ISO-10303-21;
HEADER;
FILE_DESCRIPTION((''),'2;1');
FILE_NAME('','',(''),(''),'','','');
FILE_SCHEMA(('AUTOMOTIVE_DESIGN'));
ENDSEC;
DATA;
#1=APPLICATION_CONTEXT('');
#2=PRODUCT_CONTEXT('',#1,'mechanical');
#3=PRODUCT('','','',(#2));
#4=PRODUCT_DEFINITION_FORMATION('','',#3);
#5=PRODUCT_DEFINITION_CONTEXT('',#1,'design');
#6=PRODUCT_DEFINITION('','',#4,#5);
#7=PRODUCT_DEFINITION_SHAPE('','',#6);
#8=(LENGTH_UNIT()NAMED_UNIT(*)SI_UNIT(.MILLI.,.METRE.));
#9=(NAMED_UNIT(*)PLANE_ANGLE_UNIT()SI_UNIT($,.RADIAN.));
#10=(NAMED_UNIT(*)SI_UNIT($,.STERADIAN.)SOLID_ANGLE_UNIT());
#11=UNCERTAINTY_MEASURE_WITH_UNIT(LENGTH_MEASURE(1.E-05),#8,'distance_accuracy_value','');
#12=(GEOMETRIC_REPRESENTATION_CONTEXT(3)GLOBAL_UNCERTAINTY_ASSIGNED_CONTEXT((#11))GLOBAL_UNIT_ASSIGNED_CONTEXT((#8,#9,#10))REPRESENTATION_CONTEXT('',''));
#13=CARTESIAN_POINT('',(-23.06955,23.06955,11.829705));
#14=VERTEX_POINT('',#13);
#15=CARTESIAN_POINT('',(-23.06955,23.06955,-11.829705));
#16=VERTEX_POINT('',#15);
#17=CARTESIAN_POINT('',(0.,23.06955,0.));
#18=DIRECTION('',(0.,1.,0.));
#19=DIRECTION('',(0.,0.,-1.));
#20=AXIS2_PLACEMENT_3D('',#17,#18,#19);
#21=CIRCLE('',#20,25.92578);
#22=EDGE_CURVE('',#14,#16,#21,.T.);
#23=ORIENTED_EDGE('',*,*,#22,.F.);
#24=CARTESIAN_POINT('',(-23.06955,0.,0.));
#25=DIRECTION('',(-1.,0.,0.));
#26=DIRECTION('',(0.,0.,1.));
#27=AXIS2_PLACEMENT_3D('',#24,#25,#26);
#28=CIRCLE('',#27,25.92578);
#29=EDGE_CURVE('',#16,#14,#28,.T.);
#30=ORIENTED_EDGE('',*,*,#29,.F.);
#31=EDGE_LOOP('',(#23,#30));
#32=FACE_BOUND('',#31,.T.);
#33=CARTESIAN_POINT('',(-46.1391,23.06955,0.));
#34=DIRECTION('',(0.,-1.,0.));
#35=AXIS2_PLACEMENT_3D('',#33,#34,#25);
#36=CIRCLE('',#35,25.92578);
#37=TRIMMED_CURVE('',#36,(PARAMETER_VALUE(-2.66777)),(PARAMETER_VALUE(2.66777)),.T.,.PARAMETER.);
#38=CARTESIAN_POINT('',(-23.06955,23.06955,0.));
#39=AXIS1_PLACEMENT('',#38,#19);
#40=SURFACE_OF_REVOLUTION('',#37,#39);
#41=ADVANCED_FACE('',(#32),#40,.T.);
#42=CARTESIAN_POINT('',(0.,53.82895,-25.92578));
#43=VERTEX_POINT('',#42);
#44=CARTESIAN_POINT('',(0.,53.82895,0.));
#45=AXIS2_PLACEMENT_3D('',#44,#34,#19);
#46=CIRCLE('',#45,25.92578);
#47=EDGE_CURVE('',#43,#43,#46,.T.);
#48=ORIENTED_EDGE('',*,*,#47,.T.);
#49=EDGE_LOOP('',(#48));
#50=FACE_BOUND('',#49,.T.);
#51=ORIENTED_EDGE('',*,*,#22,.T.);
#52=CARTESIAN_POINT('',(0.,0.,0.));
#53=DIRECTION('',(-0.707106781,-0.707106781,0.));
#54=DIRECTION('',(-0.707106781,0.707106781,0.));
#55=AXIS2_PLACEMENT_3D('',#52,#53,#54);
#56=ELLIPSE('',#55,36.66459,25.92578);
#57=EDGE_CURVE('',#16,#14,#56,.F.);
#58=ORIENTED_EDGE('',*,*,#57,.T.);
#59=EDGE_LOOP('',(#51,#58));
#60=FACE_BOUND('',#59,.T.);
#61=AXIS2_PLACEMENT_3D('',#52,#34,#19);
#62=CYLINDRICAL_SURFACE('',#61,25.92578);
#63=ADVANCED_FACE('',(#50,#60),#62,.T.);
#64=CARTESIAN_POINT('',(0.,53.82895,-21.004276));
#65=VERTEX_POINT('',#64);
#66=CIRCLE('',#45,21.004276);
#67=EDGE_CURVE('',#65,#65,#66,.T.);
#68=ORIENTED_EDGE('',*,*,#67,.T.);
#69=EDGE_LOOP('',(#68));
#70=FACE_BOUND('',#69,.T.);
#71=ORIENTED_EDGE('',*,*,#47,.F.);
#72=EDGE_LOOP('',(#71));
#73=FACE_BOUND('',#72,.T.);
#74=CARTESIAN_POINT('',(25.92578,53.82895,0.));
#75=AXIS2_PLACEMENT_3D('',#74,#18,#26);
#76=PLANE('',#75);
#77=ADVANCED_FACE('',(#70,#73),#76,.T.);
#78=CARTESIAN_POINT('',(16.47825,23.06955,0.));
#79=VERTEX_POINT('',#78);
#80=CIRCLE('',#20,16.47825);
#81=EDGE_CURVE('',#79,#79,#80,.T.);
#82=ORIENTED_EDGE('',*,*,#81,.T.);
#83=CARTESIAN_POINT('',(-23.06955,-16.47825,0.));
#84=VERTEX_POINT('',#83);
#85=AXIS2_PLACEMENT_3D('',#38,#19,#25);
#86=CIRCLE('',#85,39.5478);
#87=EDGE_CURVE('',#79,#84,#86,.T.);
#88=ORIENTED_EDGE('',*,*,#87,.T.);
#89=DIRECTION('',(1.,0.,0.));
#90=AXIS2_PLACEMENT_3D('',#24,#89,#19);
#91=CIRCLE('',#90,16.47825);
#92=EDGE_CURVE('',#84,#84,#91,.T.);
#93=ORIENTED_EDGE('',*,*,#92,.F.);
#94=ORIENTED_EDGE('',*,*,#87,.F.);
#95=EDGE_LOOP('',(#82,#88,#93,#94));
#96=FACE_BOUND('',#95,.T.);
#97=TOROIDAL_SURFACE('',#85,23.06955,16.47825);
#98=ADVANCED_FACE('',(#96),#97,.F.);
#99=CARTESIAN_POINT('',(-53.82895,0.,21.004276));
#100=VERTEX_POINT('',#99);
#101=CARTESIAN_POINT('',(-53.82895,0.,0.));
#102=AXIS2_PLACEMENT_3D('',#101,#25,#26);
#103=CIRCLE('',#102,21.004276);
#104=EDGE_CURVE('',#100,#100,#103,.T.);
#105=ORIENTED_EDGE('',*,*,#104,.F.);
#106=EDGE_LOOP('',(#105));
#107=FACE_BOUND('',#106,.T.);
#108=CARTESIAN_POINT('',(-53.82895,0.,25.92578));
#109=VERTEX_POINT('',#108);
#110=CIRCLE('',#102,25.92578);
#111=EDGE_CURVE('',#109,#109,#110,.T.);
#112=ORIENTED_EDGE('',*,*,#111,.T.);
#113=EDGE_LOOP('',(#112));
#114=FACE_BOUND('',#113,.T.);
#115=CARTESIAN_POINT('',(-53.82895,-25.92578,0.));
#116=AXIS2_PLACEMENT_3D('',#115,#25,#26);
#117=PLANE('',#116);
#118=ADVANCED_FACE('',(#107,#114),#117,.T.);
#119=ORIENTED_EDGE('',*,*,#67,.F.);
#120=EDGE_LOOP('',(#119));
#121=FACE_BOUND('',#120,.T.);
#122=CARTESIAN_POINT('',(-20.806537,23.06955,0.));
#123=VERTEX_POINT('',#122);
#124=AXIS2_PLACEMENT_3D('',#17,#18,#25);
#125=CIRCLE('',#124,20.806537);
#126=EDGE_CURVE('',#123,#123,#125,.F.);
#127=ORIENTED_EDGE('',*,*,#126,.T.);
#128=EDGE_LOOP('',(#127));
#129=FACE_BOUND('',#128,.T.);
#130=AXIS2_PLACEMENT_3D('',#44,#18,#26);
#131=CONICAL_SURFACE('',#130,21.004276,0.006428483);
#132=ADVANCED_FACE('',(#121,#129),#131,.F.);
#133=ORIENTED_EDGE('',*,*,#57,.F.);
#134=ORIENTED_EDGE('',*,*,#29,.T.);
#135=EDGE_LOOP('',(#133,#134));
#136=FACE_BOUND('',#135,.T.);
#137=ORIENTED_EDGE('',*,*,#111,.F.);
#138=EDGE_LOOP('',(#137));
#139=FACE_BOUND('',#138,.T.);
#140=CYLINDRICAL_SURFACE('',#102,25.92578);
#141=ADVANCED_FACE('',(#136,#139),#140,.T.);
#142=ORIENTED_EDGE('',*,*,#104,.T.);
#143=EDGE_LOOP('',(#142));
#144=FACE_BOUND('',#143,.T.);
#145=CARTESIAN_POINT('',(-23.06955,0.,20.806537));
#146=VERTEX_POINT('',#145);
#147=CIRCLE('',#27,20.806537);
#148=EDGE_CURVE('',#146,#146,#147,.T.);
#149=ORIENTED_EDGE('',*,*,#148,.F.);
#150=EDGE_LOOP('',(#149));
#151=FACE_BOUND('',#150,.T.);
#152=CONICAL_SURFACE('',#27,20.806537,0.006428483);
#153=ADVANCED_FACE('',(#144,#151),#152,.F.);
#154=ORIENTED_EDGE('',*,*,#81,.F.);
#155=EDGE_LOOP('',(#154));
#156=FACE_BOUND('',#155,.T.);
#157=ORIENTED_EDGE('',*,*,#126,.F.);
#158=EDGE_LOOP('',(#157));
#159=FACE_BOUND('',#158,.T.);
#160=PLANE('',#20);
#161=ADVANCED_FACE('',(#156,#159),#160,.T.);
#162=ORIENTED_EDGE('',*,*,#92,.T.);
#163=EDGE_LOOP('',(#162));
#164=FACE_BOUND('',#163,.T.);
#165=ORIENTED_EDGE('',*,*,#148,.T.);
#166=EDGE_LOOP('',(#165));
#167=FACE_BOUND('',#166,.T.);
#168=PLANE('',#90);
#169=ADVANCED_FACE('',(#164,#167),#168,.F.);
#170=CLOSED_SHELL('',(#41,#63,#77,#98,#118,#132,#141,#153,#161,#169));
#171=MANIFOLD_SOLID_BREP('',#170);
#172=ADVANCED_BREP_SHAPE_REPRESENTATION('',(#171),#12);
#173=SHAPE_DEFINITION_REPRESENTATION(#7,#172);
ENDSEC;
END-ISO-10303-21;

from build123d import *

# Parameters (mm, degrees)
SKETCH3_R    = 29.972
SKETCH3_R_2  = 19.05
SCALE1_SCALE = 0.865


with BuildPart() as part:
    # Sketch1 → Revolve1 (revolve)
    with BuildSketch(Plane.XY):
        Polygon((-62.23, -29.972), (-26.67, -29.972), (-26.67, -24.0538), (-62.23, -24.2824), align=None)
    revolve(axis=Axis((-62.23, 0, 0), (1, 0, 0)))


with BuildPart() as body_2:
    # Sketch2 → Revolve2 (revolve)
    with BuildSketch(Plane.XY):
        Polygon((24.2824, 62.23), (24.0538, 26.67), (29.972, 26.67), (29.972, 62.23), align=None)
    revolve(axis=Axis((0, 0, 0), (0, 1, 0)))


with BuildPart() as sweep1_tool:
    # Sweep1: sweep along a path in Sketch4
    with BuildLine(Plane.XY) as sweep1_path:
        ThreePointArc((-26.67, 0), (-7.811462, 7.811462), (0, 26.67))
    # Sketch3 → Sweep1 (sweep)
    with BuildSketch(Plane(origin=(-26.67, 0, 0), x_dir=(0, 0, -1), z_dir=(1, 0, 0))):
        Circle(SKETCH3_R)
        Circle(SKETCH3_R_2, mode=Mode.SUBTRACT)
    sweep(path=sweep1_path.line)


with BuildPart() as part_1:
    add(part.part)


with BuildPart() as part_2:
    # Sweep1: joined with sweep1_tool
    add(part_1.part.fuse(sweep1_tool.part, body_2.part, tol=0.00001))


with BuildPart() as part_3:
    # Scale1: scaled about (0, 0, 0)
    add(part_2.part.scale(SCALE1_SCALE))


solid = part_3.part
